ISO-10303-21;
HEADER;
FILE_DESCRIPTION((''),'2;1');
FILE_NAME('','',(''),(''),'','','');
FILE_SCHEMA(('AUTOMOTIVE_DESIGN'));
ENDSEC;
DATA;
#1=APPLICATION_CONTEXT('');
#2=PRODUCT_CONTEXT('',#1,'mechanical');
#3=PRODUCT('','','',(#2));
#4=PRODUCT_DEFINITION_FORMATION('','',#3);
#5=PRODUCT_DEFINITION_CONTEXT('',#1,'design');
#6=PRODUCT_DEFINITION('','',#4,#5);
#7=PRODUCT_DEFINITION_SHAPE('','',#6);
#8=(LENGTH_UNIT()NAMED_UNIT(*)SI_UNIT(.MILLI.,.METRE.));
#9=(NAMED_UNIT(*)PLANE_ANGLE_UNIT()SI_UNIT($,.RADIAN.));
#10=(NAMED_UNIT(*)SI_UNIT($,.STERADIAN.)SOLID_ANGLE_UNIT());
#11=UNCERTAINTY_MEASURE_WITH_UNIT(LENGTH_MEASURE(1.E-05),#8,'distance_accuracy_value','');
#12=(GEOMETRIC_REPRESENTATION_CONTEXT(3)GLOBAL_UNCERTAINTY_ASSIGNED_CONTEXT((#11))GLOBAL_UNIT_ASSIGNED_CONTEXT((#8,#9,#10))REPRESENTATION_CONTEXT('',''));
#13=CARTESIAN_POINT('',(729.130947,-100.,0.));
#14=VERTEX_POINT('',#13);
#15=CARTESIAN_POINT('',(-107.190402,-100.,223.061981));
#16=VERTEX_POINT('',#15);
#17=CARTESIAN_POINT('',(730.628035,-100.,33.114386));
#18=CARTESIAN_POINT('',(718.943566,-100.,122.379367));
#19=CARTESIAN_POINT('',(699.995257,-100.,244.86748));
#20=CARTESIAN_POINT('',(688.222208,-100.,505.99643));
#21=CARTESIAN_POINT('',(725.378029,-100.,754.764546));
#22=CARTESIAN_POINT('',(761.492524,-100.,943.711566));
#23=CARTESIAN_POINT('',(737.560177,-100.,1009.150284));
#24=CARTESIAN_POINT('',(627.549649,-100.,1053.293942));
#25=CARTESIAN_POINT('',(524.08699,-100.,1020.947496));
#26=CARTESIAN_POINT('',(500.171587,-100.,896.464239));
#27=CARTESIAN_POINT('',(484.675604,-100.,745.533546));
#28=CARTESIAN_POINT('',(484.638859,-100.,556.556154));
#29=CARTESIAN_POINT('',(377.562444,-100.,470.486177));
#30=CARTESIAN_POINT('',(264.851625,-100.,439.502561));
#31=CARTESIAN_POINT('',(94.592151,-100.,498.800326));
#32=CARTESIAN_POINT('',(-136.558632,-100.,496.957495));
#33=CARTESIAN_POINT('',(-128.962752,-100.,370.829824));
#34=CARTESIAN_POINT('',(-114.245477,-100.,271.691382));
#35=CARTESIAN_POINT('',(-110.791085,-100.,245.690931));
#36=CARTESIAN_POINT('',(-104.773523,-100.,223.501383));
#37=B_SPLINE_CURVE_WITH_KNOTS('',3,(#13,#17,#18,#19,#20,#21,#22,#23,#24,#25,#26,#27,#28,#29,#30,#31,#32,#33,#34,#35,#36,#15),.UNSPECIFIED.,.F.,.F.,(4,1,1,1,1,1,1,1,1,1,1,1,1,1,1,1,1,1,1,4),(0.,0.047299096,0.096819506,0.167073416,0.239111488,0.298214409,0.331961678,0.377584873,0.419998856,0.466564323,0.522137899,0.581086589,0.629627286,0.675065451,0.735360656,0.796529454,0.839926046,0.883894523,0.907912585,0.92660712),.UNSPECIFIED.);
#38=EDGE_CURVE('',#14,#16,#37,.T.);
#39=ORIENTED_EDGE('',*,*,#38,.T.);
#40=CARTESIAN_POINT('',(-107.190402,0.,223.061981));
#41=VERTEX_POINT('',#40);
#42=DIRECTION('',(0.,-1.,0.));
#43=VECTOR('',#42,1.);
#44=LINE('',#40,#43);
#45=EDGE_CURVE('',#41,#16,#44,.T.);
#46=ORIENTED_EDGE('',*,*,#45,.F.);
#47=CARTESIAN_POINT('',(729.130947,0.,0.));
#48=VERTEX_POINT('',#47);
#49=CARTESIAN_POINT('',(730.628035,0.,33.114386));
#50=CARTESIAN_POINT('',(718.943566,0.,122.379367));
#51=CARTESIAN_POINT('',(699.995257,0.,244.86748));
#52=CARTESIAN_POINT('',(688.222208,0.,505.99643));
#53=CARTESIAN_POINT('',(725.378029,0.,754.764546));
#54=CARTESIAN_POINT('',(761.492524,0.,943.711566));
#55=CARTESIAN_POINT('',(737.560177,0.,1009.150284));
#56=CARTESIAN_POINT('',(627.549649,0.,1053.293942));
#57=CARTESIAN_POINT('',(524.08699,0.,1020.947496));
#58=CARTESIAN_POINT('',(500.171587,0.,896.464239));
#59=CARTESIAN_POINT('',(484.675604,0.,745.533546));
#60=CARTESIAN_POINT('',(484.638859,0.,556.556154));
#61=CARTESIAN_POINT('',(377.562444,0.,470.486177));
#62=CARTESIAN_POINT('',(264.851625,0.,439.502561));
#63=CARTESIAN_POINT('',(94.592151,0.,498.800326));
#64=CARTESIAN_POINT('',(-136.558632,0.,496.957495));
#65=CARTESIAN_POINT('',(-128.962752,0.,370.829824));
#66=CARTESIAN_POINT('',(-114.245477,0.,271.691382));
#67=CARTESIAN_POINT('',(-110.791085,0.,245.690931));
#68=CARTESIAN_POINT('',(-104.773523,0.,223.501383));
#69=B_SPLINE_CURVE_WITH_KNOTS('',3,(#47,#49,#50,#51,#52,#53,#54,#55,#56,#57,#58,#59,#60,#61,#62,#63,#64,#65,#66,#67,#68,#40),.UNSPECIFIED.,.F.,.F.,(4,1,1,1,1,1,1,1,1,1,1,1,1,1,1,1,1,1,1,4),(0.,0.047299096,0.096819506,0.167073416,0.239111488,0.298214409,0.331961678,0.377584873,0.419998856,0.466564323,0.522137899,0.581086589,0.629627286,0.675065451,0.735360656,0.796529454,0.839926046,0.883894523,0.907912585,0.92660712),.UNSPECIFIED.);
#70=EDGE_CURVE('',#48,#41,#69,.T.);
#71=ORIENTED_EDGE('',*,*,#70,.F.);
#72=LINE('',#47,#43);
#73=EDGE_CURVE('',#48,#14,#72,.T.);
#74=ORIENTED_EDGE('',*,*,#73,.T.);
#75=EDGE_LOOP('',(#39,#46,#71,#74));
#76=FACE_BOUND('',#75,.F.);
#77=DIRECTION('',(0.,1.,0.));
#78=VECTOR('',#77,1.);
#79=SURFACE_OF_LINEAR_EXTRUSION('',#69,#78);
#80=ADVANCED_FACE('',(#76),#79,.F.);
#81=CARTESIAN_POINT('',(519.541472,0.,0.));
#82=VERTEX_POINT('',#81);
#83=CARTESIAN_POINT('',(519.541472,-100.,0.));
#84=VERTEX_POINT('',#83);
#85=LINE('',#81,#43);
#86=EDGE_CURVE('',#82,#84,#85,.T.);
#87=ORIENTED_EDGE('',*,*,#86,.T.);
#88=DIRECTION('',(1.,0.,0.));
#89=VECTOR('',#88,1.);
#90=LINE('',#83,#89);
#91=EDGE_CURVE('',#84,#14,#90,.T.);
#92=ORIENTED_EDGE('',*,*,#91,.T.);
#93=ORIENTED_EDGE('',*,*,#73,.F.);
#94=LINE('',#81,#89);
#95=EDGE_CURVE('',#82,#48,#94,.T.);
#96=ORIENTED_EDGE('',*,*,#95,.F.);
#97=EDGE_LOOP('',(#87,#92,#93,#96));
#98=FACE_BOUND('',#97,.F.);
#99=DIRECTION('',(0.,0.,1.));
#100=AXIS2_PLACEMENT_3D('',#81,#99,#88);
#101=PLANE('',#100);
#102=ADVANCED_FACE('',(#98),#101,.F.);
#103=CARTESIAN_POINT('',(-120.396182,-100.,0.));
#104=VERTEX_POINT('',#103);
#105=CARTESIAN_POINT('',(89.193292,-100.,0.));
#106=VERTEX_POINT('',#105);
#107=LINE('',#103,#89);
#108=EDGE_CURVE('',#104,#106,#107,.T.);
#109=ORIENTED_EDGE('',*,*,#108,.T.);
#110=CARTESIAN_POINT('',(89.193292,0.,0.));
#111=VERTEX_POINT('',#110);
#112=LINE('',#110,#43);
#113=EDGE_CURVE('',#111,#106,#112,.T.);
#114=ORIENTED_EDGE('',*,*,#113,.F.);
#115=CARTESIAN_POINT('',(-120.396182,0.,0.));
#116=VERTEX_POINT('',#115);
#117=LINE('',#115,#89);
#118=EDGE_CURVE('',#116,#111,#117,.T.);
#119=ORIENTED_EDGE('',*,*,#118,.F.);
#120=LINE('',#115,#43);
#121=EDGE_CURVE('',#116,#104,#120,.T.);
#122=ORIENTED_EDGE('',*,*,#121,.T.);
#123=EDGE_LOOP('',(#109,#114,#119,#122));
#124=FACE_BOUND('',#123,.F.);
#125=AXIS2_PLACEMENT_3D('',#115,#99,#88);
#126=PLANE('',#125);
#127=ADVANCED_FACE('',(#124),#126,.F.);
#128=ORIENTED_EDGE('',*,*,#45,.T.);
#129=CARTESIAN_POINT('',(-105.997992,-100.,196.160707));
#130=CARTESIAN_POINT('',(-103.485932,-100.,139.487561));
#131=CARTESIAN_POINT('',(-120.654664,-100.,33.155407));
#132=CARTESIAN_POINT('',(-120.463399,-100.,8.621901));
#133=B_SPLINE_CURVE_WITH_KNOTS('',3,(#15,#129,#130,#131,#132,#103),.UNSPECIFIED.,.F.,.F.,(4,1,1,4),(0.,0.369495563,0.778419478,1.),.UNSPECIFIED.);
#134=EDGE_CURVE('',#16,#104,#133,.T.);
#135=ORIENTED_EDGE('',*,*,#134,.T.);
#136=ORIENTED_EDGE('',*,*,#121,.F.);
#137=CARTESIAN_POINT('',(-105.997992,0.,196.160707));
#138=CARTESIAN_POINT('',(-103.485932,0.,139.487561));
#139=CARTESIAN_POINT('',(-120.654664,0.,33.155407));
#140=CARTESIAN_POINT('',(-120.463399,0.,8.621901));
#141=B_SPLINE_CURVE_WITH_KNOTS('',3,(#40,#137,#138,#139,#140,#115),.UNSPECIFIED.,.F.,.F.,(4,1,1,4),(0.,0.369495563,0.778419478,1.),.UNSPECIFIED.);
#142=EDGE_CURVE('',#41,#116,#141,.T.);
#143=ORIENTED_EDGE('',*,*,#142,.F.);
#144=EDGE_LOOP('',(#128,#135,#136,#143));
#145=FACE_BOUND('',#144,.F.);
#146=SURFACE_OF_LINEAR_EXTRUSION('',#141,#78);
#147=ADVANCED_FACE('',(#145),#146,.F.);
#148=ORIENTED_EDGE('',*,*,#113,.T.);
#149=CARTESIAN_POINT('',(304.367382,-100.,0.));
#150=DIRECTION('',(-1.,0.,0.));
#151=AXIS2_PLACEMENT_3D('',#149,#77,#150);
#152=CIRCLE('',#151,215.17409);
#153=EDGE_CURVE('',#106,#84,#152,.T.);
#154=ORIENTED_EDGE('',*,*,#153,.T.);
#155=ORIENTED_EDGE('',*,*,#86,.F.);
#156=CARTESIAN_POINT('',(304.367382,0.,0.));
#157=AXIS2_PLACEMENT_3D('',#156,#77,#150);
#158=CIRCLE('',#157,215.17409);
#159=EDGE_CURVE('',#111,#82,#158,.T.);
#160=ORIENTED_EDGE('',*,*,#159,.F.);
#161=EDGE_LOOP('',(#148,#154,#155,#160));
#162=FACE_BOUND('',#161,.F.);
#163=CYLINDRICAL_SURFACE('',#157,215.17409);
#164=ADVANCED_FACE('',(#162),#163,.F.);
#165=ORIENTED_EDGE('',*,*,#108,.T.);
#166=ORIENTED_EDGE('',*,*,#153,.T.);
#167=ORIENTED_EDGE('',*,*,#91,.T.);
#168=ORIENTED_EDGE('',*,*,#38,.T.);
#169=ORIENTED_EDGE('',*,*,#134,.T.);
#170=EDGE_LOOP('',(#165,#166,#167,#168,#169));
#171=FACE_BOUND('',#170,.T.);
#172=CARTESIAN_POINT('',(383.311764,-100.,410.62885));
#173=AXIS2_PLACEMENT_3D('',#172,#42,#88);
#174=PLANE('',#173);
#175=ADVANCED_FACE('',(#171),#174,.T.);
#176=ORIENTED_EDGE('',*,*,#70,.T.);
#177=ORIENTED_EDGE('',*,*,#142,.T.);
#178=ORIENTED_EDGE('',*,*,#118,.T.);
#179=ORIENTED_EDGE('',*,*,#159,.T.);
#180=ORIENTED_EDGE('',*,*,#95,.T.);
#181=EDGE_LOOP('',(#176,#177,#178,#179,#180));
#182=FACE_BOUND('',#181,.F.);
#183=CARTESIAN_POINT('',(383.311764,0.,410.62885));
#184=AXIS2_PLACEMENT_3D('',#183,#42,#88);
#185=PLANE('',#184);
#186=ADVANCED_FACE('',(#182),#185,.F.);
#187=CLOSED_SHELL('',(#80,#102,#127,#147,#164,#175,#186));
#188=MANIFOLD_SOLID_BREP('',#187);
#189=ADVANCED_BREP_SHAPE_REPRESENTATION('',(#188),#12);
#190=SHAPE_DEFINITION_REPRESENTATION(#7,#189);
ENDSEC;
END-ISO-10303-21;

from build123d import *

# Parameters (mm, degrees)
F1_DEPTH = 100


# Not quite as in the source:
# - a feature names something its author has since deleted; it is built from what else it names


with BuildPart() as f1:
    # F0 (on Front) → F1 (new body)
    with BuildSketch(Plane.XZ):
        with BuildLine():
            add(Edge.make_bspline(
                [(-107.1904016608, 223.0619813646), (-105.9979918183, 196.1607068759), (-103.4859317579, 139.4875607748), (-120.6546638515, 33.1554072128), (-120.4633990058, 8.6219013235), (-120.3961820889, 0)],
                knots=[0, 0, 0, 0, 0.3694955634, 0.7784194782, 1, 1, 1, 1], degree=3))
            Line((-120.3961820889, 0), (89.193292446, 0))
            ThreePointArc((89.193292446, 0), (304.3673823213, 215.1740898753), (519.5414721966, 0))
            Line((519.5414721966, 0), (729.1309467315, 0))
            add(Edge.make_bspline(
                [(729.1309467315, 0), (730.6280350069, 33.114385577), (718.9435659416, 122.3793674346), (699.9952566475, 244.8674798388), (688.2222079991, 505.9964295412), (725.3780292604, 754.7645456461), (761.4925243229, 943.711566112), (737.5601770429, 1009.1502839125), (627.5496486471, 1053.2939418875), (524.0869903868, 1020.947495576), (500.1715872211, 896.4642389354), (484.6756036033, 745.5335457472), (484.638859196, 556.5561535268), (377.5624440027, 470.4861770143), (264.8516251268, 439.5025609935), (94.5921509343, 498.8003261332), (-136.5586315251, 496.9574954182), (-128.9627521746, 370.8298243446), (-114.2454774135, 271.691381961), (-110.7910852201, 245.6909311455), (-104.7735227724, 223.501382532), (-107.1904016608, 223.0619813646)],
                knots=[0, 0, 0, 0, 0.0472990962, 0.0968195061, 0.1670734157, 0.2391114884, 0.2982144094, 0.3319616778, 0.3775848729, 0.4199988556, 0.4665643231, 0.5221378989, 0.581086589, 0.6296272862, 0.6750654507, 0.735360656, 0.7965294542, 0.8399260459, 0.883894523, 0.9079125847, 0.9266071202, 0.9266071202, 0.9266071202, 0.9266071202], degree=3))
        make_face()
    extrude(amount=F1_DEPTH)


solid = f1.part
